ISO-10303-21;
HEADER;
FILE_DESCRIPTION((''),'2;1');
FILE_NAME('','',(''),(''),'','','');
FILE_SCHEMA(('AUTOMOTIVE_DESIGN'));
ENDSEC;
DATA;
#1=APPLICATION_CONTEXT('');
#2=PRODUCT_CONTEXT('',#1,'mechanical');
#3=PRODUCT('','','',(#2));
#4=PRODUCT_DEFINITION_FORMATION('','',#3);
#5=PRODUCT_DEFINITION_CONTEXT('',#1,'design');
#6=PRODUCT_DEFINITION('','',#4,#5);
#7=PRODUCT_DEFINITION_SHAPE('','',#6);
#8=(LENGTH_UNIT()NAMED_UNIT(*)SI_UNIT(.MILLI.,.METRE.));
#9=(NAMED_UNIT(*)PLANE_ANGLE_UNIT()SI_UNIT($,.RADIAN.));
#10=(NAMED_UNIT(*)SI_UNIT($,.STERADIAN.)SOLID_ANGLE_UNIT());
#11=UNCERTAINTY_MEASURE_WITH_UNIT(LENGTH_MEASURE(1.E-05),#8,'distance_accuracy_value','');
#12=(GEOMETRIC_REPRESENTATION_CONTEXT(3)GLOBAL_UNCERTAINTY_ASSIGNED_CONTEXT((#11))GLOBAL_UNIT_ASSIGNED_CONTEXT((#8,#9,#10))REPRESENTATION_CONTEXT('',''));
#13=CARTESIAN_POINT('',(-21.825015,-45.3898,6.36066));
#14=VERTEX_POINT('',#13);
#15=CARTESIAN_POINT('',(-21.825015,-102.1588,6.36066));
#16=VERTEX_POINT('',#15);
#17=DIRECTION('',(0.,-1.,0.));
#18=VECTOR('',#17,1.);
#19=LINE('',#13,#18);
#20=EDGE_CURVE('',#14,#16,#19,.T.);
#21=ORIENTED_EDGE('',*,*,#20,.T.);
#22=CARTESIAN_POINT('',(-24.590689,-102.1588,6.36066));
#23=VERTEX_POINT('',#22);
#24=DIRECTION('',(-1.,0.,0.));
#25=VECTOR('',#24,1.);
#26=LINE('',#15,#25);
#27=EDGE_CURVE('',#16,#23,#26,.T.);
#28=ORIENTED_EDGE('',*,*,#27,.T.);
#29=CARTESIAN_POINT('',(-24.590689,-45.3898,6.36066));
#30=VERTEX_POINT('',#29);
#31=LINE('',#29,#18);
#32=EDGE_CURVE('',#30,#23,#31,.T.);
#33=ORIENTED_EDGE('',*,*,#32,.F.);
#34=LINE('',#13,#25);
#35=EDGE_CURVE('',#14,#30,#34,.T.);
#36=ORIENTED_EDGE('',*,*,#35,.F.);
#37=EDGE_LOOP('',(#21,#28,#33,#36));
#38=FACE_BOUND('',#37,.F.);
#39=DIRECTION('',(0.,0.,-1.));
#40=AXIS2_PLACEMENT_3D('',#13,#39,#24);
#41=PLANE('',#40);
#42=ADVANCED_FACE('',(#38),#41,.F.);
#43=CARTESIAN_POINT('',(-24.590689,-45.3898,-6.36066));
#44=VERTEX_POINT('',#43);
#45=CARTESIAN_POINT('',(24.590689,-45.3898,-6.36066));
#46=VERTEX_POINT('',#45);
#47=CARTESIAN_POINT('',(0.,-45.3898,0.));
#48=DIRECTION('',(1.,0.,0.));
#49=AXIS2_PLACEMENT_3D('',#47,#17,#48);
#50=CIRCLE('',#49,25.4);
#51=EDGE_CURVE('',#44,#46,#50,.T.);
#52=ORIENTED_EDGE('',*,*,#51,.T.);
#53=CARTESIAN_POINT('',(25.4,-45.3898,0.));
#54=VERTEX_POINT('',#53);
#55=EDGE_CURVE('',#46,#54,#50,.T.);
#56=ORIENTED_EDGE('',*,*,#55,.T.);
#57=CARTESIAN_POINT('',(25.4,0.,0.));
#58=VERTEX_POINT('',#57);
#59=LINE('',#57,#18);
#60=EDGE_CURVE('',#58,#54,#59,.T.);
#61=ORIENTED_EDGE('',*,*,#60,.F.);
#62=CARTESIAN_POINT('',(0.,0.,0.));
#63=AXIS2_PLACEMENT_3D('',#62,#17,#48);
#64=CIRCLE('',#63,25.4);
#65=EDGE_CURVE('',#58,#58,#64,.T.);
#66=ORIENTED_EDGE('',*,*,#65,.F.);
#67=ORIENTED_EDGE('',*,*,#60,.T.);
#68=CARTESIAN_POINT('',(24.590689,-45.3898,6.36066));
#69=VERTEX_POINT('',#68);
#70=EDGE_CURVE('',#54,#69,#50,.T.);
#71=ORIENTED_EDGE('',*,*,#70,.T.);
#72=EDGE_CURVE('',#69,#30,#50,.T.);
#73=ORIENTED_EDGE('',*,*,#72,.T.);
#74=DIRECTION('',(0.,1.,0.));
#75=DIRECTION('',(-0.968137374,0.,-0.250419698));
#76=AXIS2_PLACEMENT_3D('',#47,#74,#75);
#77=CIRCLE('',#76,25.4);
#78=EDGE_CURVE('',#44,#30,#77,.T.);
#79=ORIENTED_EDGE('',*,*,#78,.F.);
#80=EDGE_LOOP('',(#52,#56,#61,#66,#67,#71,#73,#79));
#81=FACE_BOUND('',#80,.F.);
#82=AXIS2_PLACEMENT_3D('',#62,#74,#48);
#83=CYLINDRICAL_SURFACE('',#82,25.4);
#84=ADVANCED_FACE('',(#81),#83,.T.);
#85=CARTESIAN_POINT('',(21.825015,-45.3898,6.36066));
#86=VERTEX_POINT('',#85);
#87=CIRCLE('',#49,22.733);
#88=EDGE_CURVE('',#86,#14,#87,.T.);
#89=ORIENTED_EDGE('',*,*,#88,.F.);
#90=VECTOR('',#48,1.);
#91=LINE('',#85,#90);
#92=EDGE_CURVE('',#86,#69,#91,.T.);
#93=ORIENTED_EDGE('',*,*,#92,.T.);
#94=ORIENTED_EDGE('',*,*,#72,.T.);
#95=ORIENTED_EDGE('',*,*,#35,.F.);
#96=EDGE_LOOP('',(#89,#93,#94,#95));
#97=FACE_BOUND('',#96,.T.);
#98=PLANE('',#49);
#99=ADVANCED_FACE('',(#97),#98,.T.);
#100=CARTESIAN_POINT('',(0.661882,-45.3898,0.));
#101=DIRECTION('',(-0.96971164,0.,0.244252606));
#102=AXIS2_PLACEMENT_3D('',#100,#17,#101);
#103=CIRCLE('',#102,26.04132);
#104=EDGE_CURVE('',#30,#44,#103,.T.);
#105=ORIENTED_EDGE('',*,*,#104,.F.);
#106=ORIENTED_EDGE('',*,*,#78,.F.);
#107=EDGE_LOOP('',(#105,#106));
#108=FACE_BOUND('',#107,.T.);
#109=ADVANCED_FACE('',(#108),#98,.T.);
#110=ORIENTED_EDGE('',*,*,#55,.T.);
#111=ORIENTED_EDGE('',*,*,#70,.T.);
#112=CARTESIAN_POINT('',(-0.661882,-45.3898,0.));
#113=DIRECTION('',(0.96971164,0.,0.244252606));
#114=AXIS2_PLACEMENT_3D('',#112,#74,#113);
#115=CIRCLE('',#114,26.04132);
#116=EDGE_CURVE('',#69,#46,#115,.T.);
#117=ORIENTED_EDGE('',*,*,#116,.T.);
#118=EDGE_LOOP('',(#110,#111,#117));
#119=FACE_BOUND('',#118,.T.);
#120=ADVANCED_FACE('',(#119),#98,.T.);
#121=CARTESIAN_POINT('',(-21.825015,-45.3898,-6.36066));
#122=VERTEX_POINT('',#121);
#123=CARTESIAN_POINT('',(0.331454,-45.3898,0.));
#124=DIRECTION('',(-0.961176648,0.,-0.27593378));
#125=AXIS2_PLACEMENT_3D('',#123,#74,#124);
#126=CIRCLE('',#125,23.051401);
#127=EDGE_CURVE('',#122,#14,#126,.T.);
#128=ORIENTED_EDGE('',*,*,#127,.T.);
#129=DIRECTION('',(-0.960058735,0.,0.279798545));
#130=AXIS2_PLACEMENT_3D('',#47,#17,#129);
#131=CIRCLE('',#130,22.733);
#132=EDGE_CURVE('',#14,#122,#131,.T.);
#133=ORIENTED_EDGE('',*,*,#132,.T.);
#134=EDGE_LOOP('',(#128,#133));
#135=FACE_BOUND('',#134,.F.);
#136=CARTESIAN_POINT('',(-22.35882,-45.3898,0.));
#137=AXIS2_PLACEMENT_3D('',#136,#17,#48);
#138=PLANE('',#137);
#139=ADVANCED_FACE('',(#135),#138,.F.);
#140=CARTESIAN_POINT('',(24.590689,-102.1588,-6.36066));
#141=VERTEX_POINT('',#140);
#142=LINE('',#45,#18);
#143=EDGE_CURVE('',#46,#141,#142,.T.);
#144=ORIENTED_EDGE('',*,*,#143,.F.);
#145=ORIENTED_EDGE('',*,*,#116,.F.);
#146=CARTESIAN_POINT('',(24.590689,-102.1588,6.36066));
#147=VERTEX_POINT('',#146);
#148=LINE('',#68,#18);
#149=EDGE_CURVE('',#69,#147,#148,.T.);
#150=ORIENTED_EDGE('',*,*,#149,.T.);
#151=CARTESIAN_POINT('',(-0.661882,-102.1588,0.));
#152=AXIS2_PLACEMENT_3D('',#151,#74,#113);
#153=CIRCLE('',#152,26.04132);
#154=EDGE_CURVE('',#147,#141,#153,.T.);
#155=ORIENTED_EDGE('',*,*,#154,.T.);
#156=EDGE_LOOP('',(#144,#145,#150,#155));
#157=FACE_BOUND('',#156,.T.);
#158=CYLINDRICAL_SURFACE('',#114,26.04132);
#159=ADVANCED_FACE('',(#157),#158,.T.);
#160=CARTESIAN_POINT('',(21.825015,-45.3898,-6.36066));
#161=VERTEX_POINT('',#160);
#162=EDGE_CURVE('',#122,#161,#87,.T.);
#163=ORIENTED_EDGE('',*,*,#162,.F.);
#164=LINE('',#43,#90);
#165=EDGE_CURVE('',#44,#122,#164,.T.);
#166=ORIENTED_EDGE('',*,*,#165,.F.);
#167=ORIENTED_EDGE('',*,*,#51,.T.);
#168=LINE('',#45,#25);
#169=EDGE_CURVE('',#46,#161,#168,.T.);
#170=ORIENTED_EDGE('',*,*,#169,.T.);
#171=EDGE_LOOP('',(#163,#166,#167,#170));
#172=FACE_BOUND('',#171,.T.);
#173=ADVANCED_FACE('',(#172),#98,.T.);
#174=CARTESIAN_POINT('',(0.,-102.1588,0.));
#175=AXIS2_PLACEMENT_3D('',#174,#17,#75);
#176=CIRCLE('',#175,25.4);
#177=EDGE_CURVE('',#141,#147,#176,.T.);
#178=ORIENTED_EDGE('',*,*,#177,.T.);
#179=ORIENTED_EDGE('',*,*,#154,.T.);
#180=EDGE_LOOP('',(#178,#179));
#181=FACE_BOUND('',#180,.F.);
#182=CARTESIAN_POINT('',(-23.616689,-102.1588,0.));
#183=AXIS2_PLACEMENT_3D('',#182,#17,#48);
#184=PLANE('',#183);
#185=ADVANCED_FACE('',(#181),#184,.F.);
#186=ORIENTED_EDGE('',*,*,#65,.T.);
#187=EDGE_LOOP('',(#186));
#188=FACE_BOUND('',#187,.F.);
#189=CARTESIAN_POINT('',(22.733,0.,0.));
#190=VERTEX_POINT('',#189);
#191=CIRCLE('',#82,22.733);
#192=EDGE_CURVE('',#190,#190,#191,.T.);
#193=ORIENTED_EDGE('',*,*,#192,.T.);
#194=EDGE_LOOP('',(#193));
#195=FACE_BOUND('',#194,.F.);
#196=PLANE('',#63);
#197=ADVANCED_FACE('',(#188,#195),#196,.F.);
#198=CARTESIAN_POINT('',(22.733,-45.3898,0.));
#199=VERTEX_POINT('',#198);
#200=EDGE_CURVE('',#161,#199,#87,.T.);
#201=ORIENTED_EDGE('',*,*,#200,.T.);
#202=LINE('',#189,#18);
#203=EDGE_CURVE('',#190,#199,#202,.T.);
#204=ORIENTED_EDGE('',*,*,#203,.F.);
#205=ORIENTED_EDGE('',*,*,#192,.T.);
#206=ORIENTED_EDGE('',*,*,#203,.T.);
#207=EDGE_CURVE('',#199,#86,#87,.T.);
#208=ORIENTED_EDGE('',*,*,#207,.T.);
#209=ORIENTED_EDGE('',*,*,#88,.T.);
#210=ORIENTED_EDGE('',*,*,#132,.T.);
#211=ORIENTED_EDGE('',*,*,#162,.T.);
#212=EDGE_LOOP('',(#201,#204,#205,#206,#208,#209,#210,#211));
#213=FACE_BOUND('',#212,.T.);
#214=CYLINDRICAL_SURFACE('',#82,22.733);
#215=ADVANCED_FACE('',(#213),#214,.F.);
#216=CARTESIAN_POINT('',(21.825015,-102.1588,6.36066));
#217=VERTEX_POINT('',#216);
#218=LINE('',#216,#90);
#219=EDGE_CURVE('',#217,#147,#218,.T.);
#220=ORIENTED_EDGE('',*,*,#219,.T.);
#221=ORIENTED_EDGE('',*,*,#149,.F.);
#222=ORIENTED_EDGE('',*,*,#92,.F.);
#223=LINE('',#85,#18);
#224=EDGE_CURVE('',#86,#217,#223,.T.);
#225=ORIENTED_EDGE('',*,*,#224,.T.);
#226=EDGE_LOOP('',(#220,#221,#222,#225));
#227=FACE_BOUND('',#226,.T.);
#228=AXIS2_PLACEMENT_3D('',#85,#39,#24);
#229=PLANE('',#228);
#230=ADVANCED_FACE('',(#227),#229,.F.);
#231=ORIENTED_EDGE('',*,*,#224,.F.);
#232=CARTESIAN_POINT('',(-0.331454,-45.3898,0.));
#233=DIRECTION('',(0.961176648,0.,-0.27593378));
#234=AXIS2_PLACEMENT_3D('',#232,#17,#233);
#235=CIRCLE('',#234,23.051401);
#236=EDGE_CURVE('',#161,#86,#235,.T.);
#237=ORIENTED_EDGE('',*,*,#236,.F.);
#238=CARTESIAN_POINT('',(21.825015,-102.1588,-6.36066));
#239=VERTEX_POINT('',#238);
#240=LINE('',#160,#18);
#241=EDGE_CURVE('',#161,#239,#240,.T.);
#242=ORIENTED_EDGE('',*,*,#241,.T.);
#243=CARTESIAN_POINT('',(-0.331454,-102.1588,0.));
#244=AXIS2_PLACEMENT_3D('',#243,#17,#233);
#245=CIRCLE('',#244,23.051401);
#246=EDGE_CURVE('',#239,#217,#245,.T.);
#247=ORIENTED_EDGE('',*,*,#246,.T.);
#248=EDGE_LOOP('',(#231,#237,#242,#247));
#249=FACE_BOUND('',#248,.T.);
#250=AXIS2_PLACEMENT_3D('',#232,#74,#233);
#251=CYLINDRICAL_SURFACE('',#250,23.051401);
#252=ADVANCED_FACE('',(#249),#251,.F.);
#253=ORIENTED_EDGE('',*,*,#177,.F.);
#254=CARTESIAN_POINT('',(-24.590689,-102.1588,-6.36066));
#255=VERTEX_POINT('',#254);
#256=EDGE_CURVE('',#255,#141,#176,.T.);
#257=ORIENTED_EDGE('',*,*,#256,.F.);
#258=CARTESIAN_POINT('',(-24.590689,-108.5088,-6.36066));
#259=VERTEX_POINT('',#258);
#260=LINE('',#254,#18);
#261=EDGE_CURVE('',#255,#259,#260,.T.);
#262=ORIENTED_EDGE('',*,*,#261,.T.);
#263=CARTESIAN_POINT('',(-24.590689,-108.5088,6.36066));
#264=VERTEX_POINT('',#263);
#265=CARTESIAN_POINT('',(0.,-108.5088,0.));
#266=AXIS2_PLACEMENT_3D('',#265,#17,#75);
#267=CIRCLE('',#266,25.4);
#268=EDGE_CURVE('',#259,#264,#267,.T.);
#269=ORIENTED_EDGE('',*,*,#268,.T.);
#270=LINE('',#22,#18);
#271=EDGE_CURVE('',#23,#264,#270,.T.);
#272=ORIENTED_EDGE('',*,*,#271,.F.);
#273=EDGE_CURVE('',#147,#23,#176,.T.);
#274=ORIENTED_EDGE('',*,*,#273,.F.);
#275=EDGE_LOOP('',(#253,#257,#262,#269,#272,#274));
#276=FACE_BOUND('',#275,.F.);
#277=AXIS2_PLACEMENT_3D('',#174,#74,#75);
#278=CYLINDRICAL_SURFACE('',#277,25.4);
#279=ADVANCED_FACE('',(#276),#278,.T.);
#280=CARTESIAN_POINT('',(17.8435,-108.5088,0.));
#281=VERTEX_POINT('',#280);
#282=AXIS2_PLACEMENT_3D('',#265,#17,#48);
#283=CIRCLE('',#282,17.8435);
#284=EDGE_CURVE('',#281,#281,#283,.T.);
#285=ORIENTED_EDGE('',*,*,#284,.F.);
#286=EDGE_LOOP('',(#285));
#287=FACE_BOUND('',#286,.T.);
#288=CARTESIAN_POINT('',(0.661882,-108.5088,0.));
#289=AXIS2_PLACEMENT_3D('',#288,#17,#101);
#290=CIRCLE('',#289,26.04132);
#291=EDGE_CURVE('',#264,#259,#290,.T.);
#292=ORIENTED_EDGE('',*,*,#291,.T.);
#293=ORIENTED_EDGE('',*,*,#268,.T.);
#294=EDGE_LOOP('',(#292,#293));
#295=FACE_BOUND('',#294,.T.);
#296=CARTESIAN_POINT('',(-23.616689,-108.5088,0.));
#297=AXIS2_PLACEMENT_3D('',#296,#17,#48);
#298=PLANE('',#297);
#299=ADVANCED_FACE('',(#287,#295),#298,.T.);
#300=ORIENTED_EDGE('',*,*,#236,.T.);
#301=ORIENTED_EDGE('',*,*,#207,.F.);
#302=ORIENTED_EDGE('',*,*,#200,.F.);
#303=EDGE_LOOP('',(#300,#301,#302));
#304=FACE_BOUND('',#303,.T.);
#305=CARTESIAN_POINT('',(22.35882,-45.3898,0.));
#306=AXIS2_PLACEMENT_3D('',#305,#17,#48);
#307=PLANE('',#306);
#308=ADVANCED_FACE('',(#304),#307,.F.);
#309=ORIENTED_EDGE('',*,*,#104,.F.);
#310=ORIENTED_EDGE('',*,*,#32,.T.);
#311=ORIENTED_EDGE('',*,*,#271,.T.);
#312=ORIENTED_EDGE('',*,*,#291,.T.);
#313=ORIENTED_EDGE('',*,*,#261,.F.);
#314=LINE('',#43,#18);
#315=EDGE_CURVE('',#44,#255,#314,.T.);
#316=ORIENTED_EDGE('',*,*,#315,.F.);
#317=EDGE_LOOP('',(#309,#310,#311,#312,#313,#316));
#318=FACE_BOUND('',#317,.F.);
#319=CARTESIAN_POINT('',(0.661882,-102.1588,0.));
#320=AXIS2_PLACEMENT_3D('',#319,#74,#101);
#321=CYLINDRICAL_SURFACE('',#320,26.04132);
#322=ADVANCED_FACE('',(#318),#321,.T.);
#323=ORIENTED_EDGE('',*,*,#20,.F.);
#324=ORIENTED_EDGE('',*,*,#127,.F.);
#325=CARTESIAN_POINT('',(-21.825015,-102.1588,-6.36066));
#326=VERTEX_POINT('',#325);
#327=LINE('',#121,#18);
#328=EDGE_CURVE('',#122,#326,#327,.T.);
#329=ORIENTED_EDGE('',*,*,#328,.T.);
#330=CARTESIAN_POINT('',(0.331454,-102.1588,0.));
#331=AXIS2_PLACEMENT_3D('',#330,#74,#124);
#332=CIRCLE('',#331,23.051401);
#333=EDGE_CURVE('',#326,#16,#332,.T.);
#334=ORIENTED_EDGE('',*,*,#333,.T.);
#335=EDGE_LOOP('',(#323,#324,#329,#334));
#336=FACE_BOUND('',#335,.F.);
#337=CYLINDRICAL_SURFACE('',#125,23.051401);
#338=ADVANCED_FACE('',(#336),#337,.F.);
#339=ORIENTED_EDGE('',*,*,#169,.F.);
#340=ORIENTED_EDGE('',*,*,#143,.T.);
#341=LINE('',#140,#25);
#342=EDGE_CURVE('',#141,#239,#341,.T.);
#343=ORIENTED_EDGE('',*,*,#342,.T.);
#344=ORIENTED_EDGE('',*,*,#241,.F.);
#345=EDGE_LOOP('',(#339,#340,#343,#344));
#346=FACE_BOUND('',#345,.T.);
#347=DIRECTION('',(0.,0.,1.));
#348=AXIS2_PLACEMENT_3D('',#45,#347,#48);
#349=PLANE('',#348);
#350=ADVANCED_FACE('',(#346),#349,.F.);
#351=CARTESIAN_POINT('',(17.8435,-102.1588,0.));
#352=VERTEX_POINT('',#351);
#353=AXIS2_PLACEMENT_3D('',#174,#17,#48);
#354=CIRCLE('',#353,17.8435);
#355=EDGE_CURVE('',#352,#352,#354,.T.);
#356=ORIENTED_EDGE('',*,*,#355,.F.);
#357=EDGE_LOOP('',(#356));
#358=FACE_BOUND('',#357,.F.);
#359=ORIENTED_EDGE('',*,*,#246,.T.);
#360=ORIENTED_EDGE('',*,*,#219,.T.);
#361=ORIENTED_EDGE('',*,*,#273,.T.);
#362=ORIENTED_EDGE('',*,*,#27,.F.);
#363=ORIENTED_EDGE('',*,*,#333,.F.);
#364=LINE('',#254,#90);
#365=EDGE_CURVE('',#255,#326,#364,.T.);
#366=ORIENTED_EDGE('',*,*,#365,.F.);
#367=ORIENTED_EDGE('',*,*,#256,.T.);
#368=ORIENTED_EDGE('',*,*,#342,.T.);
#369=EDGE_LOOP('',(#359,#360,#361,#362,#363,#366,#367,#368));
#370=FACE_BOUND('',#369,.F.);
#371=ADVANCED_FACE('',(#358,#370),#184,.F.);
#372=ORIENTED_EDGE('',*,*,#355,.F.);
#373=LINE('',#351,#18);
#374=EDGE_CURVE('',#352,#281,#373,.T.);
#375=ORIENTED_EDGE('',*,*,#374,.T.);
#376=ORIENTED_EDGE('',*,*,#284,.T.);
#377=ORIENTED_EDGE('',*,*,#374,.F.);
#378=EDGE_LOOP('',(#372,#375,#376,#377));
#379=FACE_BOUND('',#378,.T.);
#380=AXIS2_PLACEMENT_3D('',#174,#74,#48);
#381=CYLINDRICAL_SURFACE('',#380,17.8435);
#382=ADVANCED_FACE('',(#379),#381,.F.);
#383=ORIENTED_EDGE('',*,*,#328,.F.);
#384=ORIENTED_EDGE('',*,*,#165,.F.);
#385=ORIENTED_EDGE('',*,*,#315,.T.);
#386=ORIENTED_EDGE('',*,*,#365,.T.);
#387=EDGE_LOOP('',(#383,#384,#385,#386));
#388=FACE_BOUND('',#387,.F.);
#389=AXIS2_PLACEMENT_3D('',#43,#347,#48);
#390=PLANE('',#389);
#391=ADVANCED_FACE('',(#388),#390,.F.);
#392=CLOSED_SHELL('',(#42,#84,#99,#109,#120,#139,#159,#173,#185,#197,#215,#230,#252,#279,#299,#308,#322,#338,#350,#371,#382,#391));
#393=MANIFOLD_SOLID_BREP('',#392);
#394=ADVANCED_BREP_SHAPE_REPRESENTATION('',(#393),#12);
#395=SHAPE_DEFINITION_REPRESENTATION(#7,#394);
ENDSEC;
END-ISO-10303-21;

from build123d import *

# Parameters (mm, degrees)
F0_R     = 25.4
F0_R_2   = 22.733
F1_DEPTH = 45.3898
F3_DEPTH = 56.769
F5_R     = 17.8435
F6_DEPTH = 6.35


# Not quite as in the source:
# - a feature of the source that left no trace in its solid (it failed there, or was rolled back) is left out


with BuildPart() as f1:
    # F0 (on Front) → F1 (new body)
    with BuildSketch(Plane.XZ):
        Circle(F0_R)
        Circle(F0_R_2, mode=Mode.SUBTRACT)
    extrude(amount=F1_DEPTH)

    # F2 (on face) → F3 (join)
    with BuildSketch(Plane.XZ.offset(45.3898)):
        with BuildLine():
            ThreePointArc((-21.8250152173, 6.3606603246), (-22.733, 0), (-21.8250152173, -6.3606603246))
            ThreePointArc((-21.8250152173, -6.3606603246), (-22.7199478828, 0), (-21.8250152173, 6.3606603246))
        make_face()
        with BuildLine():
            ThreePointArc((-24.5906892997, 6.3606603246), (-25.3794381847, 0), (-24.5906892997, -6.3606603246))
            Line((-24.5906892997, -6.3606603246), (-21.8250152173, -6.3606603246))
            ThreePointArc((-21.8250152173, -6.3606603246), (-22.733, 0), (-21.8250152173, 6.3606603246))
            Line((-21.8250152173, 6.3606603246), (-24.5906892997, 6.3606603246))
        make_face()
    extrude(amount=F3_DEPTH)

    # F4: F1 across plane


with BuildPart() as f1_1:
    add(f1.part)
    add(f1.part.mirror(Plane.YZ))

    # F5 (on face) → F6 (join)
    with BuildSketch(Plane.XZ.offset(102.1588)):
        with BuildLine():
            Line((-21.8250152173, 6.3606603246), (-24.5906892997, 6.3606603246))
            ThreePointArc((-24.5906892997, 6.3606603246), (-25.3794381847, 0), (-24.5906892997, -6.3606603246))
            Line((-24.5906892997, -6.3606603246), (-21.8250152173, -6.3606603246))
            ThreePointArc((-21.8250152173, -6.3606603246), (-22.7199478828, 0), (-21.8250152173, 6.3606603246))
        make_face()
        with BuildLine():
            ThreePointArc((-24.5906892997, -6.3606603246), (3.2059703513, -25.1968600049), (25.4, 0))
            ThreePointArc((25.4, 0), (3.2059703513, 25.1968600049), (-24.5906892997, 6.3606603246))
            Line((-24.5906892997, 6.3606603246), (-21.8250152173, 6.3606603246))
            ThreePointArc((-21.8250152173, 6.3606603246), (-22.7199478828, 0), (-21.8250152173, -6.3606603246))
            Line((-21.8250152173, -6.3606603246), (-24.5906892997, -6.3606603246))
        make_face()
        Circle(F5_R, mode=Mode.SUBTRACT)
    extrude(amount=F6_DEPTH)


solid = f1_1.part
